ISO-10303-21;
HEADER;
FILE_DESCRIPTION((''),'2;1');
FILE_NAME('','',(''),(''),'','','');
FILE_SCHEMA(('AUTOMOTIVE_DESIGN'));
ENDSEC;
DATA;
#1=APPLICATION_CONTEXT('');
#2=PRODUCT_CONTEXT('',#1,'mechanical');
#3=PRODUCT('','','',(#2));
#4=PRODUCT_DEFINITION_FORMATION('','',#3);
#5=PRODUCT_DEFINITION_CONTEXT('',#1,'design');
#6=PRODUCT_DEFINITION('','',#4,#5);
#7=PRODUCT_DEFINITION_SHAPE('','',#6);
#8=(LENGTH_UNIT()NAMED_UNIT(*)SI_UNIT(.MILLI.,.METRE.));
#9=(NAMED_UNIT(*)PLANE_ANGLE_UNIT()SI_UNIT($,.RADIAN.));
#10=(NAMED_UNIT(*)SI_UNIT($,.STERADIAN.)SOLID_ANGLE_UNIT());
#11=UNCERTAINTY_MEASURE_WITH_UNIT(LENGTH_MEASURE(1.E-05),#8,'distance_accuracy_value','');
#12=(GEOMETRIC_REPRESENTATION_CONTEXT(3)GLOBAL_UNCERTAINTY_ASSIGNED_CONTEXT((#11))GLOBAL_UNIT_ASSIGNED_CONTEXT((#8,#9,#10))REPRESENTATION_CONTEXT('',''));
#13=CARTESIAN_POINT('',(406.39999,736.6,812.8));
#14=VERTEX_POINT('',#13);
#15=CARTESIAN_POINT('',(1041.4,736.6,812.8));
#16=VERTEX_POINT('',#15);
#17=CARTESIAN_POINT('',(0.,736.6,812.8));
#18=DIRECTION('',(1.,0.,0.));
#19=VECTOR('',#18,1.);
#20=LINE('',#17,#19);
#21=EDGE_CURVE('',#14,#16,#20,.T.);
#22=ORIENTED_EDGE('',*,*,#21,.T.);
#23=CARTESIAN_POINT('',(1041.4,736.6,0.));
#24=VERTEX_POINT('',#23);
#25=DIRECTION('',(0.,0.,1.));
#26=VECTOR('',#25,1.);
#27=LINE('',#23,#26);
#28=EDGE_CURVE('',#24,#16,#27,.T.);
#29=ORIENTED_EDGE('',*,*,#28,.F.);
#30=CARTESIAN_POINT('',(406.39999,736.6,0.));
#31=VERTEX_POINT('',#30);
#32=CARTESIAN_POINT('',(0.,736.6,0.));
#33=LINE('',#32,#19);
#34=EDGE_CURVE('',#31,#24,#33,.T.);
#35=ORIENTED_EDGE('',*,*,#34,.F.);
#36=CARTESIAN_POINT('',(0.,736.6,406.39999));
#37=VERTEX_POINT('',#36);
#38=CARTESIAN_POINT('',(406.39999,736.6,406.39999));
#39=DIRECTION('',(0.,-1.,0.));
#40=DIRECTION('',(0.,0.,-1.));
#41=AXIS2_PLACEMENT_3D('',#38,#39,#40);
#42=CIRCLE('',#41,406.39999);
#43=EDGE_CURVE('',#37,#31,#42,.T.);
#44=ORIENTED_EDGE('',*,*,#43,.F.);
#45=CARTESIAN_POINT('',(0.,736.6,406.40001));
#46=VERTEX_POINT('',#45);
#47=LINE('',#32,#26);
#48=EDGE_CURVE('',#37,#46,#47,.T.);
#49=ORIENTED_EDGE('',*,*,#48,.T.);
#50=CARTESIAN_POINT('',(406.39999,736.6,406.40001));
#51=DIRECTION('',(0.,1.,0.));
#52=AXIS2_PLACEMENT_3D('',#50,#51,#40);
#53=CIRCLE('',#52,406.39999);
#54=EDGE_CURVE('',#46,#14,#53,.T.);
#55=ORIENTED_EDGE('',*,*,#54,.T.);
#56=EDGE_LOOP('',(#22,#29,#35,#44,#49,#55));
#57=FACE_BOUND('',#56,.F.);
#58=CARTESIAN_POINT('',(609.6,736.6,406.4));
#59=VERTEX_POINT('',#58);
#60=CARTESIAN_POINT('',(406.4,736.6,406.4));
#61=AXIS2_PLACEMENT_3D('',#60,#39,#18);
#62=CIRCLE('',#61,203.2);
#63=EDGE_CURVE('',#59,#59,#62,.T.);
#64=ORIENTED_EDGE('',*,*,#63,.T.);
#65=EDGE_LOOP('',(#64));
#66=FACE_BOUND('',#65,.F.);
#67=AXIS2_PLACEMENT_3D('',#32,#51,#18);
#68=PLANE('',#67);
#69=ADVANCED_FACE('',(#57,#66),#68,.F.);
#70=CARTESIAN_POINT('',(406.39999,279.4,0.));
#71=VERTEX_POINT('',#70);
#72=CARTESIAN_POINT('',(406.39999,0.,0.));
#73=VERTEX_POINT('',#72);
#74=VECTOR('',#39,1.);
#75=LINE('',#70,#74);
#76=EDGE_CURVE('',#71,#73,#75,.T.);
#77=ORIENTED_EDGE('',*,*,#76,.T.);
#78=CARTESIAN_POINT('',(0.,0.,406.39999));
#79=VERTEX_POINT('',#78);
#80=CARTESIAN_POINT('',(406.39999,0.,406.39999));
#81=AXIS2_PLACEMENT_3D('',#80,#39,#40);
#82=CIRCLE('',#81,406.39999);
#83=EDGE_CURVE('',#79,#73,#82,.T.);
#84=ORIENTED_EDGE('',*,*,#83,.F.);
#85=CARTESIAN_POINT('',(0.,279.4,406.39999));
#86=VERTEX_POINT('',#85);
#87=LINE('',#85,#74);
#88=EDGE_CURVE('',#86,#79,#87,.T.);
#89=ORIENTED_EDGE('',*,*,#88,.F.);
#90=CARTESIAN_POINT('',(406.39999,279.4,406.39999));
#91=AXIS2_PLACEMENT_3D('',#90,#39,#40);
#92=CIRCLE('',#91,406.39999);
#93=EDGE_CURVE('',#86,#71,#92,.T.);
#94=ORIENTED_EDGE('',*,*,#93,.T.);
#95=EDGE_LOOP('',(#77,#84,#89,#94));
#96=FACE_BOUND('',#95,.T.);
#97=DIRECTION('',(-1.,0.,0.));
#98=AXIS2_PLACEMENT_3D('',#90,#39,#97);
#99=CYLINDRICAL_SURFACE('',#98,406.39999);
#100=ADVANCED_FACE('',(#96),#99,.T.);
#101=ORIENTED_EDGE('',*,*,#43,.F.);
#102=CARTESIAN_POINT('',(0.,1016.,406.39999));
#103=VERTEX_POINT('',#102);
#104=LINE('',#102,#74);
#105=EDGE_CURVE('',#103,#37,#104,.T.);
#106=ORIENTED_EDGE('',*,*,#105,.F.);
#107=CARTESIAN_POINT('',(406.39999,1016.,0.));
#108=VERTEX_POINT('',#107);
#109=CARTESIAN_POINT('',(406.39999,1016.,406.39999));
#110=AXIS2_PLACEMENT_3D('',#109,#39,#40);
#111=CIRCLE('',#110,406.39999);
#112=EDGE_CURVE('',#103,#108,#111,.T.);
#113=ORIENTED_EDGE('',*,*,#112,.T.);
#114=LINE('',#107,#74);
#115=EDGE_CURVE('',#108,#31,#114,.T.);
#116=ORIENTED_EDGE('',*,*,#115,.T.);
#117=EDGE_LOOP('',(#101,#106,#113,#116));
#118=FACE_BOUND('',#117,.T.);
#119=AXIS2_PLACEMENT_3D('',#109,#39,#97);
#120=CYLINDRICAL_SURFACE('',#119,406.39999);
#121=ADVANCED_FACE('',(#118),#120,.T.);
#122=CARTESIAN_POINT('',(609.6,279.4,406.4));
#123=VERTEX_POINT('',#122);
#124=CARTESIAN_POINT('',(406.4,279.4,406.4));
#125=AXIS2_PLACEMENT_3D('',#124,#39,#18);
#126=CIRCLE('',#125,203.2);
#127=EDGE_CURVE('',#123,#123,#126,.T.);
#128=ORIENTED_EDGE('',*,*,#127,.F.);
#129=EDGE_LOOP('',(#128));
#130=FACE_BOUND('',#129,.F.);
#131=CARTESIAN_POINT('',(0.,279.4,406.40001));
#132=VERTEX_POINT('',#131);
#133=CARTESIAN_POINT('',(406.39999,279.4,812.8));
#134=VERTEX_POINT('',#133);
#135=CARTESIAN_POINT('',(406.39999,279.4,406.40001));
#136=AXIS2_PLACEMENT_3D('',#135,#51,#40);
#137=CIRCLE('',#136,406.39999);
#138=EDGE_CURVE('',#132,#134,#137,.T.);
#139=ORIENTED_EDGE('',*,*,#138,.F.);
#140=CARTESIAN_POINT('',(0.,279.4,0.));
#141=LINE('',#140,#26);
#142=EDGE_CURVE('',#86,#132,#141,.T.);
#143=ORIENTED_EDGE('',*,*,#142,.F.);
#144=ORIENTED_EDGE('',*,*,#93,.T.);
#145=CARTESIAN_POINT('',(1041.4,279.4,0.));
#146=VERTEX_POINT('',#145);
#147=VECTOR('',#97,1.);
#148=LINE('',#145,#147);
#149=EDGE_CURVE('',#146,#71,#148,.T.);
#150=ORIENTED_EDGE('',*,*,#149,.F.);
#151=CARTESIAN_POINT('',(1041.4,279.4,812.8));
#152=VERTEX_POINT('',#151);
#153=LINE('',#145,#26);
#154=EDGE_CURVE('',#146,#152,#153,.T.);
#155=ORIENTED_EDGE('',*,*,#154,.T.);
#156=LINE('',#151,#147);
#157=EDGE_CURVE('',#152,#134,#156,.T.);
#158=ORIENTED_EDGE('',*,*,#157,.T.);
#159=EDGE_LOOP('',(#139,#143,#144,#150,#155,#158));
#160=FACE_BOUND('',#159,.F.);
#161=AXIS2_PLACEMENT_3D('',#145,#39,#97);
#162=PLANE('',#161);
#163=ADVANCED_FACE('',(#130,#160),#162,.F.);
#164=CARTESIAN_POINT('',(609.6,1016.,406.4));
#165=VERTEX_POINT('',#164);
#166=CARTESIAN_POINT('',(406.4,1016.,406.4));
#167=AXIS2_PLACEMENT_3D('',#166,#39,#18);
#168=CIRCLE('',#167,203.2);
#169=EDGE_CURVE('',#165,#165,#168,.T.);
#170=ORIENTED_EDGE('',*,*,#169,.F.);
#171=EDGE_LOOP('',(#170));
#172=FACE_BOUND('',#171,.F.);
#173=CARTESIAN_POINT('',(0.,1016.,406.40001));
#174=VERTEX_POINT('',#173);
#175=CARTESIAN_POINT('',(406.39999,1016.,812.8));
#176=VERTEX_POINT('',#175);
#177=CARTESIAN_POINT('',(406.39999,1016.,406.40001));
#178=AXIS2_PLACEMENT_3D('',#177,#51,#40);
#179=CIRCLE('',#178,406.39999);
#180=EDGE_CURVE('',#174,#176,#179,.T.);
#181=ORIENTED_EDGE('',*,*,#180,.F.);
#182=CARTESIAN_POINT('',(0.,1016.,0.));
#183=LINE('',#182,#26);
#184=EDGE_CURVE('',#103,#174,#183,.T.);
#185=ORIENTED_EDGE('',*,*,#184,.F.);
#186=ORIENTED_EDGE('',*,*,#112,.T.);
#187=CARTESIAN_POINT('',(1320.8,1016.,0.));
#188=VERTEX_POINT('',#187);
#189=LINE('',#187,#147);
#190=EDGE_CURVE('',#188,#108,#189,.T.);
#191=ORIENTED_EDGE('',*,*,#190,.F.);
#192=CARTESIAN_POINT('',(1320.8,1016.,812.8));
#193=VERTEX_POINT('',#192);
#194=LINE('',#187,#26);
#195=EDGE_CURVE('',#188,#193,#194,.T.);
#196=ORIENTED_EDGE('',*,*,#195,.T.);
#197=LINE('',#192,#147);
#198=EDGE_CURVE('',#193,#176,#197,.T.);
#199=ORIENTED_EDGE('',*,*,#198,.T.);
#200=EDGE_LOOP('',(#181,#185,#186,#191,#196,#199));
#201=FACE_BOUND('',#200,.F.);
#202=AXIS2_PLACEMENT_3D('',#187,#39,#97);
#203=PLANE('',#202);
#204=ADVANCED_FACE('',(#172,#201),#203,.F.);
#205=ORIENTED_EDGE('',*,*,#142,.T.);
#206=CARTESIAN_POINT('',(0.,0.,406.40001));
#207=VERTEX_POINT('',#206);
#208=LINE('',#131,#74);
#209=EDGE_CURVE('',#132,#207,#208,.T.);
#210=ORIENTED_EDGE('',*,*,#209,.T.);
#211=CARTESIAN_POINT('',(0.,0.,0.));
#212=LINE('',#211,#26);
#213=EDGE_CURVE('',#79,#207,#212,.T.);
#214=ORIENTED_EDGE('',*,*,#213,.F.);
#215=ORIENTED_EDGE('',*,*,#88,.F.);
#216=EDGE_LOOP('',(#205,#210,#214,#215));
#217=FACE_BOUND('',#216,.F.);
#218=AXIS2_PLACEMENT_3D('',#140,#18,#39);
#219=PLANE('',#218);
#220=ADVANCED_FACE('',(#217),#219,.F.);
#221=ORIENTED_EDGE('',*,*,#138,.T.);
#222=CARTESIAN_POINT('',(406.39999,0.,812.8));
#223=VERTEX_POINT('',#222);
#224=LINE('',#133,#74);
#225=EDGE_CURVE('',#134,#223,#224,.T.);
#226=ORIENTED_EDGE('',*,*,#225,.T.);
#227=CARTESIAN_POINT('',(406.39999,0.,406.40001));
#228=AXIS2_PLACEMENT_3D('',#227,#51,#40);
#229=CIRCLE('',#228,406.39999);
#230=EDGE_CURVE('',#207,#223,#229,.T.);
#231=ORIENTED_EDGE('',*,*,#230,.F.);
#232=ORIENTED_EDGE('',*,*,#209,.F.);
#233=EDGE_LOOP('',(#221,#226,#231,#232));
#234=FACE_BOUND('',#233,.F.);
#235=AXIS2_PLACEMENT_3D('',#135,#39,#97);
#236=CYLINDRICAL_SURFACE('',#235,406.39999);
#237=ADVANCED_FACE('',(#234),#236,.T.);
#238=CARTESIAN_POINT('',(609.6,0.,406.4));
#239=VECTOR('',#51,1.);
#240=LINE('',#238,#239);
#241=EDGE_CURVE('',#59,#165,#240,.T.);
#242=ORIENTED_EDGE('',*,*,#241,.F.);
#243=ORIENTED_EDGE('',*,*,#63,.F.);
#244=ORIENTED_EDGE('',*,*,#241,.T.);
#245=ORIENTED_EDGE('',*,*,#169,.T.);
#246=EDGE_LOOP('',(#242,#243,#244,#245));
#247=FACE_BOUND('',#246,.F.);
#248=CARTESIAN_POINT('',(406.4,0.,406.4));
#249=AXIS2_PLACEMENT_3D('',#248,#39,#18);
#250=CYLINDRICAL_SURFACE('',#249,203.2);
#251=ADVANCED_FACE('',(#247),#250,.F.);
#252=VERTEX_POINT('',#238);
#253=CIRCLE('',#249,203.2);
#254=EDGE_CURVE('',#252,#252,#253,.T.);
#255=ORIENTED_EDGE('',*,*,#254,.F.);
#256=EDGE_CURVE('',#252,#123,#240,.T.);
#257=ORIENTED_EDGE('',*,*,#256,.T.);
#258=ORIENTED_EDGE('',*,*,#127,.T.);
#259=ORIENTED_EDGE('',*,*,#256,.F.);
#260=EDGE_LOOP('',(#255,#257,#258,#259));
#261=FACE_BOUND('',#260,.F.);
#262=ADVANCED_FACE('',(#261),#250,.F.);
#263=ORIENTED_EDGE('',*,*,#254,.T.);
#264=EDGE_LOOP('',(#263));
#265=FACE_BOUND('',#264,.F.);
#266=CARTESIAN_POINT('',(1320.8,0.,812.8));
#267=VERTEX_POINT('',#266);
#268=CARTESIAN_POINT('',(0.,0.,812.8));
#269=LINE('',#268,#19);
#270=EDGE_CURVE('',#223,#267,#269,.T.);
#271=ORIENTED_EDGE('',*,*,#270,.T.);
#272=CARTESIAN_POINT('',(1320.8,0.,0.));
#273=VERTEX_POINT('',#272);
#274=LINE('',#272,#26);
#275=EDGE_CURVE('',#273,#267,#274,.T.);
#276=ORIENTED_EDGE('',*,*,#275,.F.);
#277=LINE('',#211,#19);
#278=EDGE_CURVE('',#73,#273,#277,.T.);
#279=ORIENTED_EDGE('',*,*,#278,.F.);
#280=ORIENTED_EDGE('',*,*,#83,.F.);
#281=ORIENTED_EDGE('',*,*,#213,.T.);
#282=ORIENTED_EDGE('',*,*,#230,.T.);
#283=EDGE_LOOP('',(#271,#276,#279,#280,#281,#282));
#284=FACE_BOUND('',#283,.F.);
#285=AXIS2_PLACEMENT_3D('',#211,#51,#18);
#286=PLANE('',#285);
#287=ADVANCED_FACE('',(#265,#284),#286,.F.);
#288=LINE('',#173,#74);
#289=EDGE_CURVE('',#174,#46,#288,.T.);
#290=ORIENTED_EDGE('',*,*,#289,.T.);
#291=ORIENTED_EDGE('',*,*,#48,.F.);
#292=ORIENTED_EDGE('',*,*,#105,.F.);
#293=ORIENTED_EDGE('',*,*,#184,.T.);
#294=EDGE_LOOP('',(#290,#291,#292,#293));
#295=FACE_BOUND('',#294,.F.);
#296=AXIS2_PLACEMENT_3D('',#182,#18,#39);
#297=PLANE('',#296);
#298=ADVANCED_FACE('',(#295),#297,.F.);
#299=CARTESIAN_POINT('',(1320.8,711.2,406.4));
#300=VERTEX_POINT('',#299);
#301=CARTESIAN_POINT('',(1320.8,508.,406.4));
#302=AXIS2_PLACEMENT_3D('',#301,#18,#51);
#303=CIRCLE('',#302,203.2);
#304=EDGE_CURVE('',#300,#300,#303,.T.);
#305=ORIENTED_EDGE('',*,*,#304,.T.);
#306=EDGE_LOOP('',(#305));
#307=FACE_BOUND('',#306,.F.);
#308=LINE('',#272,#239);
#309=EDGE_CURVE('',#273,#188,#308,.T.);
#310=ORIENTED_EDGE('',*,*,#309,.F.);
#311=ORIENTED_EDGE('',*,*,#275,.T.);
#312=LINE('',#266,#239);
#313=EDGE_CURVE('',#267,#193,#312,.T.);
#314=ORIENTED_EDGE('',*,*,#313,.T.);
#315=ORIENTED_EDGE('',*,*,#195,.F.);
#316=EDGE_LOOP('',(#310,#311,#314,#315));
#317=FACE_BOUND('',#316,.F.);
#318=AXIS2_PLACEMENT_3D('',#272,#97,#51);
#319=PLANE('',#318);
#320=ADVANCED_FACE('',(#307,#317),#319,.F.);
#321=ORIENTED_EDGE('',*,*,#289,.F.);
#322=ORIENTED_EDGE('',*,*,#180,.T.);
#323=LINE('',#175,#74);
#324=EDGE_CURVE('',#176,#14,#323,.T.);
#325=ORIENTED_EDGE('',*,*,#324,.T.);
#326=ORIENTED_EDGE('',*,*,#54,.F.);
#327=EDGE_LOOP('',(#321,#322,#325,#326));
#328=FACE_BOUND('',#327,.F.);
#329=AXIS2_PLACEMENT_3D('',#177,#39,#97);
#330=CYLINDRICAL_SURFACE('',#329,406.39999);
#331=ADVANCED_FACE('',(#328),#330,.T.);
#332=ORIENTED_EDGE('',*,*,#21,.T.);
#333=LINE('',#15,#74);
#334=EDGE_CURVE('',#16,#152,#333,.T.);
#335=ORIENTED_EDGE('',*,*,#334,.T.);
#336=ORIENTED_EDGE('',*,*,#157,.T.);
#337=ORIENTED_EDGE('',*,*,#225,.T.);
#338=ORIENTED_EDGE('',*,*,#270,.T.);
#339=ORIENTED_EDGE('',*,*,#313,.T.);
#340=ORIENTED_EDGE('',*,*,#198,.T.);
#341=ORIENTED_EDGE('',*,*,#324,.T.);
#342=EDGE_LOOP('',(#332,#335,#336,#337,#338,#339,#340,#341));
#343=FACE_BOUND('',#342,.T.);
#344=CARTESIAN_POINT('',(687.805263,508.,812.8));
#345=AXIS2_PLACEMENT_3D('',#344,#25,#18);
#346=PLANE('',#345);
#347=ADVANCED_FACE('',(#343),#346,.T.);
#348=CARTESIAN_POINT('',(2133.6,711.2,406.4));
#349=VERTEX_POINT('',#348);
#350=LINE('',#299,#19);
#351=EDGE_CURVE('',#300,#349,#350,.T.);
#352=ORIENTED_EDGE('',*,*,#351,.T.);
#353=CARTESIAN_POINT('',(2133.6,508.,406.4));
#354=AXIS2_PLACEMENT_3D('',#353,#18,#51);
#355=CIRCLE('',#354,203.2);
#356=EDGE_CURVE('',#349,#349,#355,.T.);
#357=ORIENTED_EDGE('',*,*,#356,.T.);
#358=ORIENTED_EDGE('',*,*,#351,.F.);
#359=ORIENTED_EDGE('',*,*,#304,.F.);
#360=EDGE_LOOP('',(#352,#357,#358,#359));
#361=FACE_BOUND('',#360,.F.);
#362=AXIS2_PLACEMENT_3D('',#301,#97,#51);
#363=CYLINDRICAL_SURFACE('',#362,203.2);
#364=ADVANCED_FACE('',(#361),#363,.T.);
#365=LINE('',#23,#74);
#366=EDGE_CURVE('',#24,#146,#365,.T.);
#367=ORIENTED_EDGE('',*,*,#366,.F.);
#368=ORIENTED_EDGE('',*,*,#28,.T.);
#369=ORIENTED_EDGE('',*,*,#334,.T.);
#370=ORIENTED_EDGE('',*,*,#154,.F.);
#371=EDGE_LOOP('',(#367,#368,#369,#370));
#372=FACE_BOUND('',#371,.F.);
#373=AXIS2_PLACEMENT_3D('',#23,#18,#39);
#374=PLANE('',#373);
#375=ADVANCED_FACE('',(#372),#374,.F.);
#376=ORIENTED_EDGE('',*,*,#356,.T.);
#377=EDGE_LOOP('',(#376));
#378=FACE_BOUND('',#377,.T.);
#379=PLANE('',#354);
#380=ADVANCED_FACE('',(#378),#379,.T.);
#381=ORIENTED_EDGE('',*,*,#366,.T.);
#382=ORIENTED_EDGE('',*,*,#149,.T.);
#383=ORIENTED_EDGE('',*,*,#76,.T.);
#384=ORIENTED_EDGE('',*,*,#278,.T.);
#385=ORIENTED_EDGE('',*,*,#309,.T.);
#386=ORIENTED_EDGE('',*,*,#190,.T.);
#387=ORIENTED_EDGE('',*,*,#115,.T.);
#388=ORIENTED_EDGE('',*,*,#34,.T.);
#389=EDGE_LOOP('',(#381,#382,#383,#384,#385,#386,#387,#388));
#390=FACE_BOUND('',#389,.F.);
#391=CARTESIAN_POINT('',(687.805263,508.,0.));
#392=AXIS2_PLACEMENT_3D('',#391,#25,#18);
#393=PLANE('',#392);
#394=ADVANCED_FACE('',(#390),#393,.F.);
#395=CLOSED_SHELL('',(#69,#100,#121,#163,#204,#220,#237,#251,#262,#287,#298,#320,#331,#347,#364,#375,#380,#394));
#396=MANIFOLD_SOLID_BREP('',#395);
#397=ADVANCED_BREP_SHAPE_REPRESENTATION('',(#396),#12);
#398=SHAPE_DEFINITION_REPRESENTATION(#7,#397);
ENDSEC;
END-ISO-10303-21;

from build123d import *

# Parameters (mm, degrees)
F1_DEPTH = 812.8
F2_R     = 406.39999
F3_R     = 203.2
F4_DEPTH = 1016.001
F5_R     = 203.2
F6_DEPTH = 812.8


# Not quite as in the source:
# - a fillet or chamfer is up to 0.001 mm smaller than in the source, because OpenCascade refuses the exact size


with BuildPart() as f1:
    # F0 (on Top) → F1 (new body)
    with BuildSketch(Plane.XY):
        Polygon((0, 279.4), (0, 0), (1320.8, 0), (1320.8, 1016), (0, 1016), (0, 736.6), (1041.4, 736.6), (1041.4, 279.4), align=None)
    extrude(amount=F1_DEPTH)

    # F2 (radius 406.4 in the source; OpenCascade refuses exactly that, so slightly less here)
    f2_edges = [f1.edges().sort_by_distance(p)[0] for p in [
        (0, 139.7, 812.8),
        (0, 139.7, 0),
        (0, 876.3, 0),
        (0, 876.3, 812.8),
    ]]
    fillet(f2_edges, radius=F2_R)

    # F3 (on face) → F4 (cut, through all)
    with BuildSketch(Plane.XZ):
        with Locations((406.4, 406.4)):
            Circle(F3_R)
    extrude(amount=-F4_DEPTH, mode=Mode.SUBTRACT)

    # F5 (on face) → F6 (join)
    with BuildSketch(Plane.YZ.offset(1320.8)):
        with Locations((508, 406.4)):
            Circle(F5_R)
    extrude(amount=F6_DEPTH)


solid = f1.part
